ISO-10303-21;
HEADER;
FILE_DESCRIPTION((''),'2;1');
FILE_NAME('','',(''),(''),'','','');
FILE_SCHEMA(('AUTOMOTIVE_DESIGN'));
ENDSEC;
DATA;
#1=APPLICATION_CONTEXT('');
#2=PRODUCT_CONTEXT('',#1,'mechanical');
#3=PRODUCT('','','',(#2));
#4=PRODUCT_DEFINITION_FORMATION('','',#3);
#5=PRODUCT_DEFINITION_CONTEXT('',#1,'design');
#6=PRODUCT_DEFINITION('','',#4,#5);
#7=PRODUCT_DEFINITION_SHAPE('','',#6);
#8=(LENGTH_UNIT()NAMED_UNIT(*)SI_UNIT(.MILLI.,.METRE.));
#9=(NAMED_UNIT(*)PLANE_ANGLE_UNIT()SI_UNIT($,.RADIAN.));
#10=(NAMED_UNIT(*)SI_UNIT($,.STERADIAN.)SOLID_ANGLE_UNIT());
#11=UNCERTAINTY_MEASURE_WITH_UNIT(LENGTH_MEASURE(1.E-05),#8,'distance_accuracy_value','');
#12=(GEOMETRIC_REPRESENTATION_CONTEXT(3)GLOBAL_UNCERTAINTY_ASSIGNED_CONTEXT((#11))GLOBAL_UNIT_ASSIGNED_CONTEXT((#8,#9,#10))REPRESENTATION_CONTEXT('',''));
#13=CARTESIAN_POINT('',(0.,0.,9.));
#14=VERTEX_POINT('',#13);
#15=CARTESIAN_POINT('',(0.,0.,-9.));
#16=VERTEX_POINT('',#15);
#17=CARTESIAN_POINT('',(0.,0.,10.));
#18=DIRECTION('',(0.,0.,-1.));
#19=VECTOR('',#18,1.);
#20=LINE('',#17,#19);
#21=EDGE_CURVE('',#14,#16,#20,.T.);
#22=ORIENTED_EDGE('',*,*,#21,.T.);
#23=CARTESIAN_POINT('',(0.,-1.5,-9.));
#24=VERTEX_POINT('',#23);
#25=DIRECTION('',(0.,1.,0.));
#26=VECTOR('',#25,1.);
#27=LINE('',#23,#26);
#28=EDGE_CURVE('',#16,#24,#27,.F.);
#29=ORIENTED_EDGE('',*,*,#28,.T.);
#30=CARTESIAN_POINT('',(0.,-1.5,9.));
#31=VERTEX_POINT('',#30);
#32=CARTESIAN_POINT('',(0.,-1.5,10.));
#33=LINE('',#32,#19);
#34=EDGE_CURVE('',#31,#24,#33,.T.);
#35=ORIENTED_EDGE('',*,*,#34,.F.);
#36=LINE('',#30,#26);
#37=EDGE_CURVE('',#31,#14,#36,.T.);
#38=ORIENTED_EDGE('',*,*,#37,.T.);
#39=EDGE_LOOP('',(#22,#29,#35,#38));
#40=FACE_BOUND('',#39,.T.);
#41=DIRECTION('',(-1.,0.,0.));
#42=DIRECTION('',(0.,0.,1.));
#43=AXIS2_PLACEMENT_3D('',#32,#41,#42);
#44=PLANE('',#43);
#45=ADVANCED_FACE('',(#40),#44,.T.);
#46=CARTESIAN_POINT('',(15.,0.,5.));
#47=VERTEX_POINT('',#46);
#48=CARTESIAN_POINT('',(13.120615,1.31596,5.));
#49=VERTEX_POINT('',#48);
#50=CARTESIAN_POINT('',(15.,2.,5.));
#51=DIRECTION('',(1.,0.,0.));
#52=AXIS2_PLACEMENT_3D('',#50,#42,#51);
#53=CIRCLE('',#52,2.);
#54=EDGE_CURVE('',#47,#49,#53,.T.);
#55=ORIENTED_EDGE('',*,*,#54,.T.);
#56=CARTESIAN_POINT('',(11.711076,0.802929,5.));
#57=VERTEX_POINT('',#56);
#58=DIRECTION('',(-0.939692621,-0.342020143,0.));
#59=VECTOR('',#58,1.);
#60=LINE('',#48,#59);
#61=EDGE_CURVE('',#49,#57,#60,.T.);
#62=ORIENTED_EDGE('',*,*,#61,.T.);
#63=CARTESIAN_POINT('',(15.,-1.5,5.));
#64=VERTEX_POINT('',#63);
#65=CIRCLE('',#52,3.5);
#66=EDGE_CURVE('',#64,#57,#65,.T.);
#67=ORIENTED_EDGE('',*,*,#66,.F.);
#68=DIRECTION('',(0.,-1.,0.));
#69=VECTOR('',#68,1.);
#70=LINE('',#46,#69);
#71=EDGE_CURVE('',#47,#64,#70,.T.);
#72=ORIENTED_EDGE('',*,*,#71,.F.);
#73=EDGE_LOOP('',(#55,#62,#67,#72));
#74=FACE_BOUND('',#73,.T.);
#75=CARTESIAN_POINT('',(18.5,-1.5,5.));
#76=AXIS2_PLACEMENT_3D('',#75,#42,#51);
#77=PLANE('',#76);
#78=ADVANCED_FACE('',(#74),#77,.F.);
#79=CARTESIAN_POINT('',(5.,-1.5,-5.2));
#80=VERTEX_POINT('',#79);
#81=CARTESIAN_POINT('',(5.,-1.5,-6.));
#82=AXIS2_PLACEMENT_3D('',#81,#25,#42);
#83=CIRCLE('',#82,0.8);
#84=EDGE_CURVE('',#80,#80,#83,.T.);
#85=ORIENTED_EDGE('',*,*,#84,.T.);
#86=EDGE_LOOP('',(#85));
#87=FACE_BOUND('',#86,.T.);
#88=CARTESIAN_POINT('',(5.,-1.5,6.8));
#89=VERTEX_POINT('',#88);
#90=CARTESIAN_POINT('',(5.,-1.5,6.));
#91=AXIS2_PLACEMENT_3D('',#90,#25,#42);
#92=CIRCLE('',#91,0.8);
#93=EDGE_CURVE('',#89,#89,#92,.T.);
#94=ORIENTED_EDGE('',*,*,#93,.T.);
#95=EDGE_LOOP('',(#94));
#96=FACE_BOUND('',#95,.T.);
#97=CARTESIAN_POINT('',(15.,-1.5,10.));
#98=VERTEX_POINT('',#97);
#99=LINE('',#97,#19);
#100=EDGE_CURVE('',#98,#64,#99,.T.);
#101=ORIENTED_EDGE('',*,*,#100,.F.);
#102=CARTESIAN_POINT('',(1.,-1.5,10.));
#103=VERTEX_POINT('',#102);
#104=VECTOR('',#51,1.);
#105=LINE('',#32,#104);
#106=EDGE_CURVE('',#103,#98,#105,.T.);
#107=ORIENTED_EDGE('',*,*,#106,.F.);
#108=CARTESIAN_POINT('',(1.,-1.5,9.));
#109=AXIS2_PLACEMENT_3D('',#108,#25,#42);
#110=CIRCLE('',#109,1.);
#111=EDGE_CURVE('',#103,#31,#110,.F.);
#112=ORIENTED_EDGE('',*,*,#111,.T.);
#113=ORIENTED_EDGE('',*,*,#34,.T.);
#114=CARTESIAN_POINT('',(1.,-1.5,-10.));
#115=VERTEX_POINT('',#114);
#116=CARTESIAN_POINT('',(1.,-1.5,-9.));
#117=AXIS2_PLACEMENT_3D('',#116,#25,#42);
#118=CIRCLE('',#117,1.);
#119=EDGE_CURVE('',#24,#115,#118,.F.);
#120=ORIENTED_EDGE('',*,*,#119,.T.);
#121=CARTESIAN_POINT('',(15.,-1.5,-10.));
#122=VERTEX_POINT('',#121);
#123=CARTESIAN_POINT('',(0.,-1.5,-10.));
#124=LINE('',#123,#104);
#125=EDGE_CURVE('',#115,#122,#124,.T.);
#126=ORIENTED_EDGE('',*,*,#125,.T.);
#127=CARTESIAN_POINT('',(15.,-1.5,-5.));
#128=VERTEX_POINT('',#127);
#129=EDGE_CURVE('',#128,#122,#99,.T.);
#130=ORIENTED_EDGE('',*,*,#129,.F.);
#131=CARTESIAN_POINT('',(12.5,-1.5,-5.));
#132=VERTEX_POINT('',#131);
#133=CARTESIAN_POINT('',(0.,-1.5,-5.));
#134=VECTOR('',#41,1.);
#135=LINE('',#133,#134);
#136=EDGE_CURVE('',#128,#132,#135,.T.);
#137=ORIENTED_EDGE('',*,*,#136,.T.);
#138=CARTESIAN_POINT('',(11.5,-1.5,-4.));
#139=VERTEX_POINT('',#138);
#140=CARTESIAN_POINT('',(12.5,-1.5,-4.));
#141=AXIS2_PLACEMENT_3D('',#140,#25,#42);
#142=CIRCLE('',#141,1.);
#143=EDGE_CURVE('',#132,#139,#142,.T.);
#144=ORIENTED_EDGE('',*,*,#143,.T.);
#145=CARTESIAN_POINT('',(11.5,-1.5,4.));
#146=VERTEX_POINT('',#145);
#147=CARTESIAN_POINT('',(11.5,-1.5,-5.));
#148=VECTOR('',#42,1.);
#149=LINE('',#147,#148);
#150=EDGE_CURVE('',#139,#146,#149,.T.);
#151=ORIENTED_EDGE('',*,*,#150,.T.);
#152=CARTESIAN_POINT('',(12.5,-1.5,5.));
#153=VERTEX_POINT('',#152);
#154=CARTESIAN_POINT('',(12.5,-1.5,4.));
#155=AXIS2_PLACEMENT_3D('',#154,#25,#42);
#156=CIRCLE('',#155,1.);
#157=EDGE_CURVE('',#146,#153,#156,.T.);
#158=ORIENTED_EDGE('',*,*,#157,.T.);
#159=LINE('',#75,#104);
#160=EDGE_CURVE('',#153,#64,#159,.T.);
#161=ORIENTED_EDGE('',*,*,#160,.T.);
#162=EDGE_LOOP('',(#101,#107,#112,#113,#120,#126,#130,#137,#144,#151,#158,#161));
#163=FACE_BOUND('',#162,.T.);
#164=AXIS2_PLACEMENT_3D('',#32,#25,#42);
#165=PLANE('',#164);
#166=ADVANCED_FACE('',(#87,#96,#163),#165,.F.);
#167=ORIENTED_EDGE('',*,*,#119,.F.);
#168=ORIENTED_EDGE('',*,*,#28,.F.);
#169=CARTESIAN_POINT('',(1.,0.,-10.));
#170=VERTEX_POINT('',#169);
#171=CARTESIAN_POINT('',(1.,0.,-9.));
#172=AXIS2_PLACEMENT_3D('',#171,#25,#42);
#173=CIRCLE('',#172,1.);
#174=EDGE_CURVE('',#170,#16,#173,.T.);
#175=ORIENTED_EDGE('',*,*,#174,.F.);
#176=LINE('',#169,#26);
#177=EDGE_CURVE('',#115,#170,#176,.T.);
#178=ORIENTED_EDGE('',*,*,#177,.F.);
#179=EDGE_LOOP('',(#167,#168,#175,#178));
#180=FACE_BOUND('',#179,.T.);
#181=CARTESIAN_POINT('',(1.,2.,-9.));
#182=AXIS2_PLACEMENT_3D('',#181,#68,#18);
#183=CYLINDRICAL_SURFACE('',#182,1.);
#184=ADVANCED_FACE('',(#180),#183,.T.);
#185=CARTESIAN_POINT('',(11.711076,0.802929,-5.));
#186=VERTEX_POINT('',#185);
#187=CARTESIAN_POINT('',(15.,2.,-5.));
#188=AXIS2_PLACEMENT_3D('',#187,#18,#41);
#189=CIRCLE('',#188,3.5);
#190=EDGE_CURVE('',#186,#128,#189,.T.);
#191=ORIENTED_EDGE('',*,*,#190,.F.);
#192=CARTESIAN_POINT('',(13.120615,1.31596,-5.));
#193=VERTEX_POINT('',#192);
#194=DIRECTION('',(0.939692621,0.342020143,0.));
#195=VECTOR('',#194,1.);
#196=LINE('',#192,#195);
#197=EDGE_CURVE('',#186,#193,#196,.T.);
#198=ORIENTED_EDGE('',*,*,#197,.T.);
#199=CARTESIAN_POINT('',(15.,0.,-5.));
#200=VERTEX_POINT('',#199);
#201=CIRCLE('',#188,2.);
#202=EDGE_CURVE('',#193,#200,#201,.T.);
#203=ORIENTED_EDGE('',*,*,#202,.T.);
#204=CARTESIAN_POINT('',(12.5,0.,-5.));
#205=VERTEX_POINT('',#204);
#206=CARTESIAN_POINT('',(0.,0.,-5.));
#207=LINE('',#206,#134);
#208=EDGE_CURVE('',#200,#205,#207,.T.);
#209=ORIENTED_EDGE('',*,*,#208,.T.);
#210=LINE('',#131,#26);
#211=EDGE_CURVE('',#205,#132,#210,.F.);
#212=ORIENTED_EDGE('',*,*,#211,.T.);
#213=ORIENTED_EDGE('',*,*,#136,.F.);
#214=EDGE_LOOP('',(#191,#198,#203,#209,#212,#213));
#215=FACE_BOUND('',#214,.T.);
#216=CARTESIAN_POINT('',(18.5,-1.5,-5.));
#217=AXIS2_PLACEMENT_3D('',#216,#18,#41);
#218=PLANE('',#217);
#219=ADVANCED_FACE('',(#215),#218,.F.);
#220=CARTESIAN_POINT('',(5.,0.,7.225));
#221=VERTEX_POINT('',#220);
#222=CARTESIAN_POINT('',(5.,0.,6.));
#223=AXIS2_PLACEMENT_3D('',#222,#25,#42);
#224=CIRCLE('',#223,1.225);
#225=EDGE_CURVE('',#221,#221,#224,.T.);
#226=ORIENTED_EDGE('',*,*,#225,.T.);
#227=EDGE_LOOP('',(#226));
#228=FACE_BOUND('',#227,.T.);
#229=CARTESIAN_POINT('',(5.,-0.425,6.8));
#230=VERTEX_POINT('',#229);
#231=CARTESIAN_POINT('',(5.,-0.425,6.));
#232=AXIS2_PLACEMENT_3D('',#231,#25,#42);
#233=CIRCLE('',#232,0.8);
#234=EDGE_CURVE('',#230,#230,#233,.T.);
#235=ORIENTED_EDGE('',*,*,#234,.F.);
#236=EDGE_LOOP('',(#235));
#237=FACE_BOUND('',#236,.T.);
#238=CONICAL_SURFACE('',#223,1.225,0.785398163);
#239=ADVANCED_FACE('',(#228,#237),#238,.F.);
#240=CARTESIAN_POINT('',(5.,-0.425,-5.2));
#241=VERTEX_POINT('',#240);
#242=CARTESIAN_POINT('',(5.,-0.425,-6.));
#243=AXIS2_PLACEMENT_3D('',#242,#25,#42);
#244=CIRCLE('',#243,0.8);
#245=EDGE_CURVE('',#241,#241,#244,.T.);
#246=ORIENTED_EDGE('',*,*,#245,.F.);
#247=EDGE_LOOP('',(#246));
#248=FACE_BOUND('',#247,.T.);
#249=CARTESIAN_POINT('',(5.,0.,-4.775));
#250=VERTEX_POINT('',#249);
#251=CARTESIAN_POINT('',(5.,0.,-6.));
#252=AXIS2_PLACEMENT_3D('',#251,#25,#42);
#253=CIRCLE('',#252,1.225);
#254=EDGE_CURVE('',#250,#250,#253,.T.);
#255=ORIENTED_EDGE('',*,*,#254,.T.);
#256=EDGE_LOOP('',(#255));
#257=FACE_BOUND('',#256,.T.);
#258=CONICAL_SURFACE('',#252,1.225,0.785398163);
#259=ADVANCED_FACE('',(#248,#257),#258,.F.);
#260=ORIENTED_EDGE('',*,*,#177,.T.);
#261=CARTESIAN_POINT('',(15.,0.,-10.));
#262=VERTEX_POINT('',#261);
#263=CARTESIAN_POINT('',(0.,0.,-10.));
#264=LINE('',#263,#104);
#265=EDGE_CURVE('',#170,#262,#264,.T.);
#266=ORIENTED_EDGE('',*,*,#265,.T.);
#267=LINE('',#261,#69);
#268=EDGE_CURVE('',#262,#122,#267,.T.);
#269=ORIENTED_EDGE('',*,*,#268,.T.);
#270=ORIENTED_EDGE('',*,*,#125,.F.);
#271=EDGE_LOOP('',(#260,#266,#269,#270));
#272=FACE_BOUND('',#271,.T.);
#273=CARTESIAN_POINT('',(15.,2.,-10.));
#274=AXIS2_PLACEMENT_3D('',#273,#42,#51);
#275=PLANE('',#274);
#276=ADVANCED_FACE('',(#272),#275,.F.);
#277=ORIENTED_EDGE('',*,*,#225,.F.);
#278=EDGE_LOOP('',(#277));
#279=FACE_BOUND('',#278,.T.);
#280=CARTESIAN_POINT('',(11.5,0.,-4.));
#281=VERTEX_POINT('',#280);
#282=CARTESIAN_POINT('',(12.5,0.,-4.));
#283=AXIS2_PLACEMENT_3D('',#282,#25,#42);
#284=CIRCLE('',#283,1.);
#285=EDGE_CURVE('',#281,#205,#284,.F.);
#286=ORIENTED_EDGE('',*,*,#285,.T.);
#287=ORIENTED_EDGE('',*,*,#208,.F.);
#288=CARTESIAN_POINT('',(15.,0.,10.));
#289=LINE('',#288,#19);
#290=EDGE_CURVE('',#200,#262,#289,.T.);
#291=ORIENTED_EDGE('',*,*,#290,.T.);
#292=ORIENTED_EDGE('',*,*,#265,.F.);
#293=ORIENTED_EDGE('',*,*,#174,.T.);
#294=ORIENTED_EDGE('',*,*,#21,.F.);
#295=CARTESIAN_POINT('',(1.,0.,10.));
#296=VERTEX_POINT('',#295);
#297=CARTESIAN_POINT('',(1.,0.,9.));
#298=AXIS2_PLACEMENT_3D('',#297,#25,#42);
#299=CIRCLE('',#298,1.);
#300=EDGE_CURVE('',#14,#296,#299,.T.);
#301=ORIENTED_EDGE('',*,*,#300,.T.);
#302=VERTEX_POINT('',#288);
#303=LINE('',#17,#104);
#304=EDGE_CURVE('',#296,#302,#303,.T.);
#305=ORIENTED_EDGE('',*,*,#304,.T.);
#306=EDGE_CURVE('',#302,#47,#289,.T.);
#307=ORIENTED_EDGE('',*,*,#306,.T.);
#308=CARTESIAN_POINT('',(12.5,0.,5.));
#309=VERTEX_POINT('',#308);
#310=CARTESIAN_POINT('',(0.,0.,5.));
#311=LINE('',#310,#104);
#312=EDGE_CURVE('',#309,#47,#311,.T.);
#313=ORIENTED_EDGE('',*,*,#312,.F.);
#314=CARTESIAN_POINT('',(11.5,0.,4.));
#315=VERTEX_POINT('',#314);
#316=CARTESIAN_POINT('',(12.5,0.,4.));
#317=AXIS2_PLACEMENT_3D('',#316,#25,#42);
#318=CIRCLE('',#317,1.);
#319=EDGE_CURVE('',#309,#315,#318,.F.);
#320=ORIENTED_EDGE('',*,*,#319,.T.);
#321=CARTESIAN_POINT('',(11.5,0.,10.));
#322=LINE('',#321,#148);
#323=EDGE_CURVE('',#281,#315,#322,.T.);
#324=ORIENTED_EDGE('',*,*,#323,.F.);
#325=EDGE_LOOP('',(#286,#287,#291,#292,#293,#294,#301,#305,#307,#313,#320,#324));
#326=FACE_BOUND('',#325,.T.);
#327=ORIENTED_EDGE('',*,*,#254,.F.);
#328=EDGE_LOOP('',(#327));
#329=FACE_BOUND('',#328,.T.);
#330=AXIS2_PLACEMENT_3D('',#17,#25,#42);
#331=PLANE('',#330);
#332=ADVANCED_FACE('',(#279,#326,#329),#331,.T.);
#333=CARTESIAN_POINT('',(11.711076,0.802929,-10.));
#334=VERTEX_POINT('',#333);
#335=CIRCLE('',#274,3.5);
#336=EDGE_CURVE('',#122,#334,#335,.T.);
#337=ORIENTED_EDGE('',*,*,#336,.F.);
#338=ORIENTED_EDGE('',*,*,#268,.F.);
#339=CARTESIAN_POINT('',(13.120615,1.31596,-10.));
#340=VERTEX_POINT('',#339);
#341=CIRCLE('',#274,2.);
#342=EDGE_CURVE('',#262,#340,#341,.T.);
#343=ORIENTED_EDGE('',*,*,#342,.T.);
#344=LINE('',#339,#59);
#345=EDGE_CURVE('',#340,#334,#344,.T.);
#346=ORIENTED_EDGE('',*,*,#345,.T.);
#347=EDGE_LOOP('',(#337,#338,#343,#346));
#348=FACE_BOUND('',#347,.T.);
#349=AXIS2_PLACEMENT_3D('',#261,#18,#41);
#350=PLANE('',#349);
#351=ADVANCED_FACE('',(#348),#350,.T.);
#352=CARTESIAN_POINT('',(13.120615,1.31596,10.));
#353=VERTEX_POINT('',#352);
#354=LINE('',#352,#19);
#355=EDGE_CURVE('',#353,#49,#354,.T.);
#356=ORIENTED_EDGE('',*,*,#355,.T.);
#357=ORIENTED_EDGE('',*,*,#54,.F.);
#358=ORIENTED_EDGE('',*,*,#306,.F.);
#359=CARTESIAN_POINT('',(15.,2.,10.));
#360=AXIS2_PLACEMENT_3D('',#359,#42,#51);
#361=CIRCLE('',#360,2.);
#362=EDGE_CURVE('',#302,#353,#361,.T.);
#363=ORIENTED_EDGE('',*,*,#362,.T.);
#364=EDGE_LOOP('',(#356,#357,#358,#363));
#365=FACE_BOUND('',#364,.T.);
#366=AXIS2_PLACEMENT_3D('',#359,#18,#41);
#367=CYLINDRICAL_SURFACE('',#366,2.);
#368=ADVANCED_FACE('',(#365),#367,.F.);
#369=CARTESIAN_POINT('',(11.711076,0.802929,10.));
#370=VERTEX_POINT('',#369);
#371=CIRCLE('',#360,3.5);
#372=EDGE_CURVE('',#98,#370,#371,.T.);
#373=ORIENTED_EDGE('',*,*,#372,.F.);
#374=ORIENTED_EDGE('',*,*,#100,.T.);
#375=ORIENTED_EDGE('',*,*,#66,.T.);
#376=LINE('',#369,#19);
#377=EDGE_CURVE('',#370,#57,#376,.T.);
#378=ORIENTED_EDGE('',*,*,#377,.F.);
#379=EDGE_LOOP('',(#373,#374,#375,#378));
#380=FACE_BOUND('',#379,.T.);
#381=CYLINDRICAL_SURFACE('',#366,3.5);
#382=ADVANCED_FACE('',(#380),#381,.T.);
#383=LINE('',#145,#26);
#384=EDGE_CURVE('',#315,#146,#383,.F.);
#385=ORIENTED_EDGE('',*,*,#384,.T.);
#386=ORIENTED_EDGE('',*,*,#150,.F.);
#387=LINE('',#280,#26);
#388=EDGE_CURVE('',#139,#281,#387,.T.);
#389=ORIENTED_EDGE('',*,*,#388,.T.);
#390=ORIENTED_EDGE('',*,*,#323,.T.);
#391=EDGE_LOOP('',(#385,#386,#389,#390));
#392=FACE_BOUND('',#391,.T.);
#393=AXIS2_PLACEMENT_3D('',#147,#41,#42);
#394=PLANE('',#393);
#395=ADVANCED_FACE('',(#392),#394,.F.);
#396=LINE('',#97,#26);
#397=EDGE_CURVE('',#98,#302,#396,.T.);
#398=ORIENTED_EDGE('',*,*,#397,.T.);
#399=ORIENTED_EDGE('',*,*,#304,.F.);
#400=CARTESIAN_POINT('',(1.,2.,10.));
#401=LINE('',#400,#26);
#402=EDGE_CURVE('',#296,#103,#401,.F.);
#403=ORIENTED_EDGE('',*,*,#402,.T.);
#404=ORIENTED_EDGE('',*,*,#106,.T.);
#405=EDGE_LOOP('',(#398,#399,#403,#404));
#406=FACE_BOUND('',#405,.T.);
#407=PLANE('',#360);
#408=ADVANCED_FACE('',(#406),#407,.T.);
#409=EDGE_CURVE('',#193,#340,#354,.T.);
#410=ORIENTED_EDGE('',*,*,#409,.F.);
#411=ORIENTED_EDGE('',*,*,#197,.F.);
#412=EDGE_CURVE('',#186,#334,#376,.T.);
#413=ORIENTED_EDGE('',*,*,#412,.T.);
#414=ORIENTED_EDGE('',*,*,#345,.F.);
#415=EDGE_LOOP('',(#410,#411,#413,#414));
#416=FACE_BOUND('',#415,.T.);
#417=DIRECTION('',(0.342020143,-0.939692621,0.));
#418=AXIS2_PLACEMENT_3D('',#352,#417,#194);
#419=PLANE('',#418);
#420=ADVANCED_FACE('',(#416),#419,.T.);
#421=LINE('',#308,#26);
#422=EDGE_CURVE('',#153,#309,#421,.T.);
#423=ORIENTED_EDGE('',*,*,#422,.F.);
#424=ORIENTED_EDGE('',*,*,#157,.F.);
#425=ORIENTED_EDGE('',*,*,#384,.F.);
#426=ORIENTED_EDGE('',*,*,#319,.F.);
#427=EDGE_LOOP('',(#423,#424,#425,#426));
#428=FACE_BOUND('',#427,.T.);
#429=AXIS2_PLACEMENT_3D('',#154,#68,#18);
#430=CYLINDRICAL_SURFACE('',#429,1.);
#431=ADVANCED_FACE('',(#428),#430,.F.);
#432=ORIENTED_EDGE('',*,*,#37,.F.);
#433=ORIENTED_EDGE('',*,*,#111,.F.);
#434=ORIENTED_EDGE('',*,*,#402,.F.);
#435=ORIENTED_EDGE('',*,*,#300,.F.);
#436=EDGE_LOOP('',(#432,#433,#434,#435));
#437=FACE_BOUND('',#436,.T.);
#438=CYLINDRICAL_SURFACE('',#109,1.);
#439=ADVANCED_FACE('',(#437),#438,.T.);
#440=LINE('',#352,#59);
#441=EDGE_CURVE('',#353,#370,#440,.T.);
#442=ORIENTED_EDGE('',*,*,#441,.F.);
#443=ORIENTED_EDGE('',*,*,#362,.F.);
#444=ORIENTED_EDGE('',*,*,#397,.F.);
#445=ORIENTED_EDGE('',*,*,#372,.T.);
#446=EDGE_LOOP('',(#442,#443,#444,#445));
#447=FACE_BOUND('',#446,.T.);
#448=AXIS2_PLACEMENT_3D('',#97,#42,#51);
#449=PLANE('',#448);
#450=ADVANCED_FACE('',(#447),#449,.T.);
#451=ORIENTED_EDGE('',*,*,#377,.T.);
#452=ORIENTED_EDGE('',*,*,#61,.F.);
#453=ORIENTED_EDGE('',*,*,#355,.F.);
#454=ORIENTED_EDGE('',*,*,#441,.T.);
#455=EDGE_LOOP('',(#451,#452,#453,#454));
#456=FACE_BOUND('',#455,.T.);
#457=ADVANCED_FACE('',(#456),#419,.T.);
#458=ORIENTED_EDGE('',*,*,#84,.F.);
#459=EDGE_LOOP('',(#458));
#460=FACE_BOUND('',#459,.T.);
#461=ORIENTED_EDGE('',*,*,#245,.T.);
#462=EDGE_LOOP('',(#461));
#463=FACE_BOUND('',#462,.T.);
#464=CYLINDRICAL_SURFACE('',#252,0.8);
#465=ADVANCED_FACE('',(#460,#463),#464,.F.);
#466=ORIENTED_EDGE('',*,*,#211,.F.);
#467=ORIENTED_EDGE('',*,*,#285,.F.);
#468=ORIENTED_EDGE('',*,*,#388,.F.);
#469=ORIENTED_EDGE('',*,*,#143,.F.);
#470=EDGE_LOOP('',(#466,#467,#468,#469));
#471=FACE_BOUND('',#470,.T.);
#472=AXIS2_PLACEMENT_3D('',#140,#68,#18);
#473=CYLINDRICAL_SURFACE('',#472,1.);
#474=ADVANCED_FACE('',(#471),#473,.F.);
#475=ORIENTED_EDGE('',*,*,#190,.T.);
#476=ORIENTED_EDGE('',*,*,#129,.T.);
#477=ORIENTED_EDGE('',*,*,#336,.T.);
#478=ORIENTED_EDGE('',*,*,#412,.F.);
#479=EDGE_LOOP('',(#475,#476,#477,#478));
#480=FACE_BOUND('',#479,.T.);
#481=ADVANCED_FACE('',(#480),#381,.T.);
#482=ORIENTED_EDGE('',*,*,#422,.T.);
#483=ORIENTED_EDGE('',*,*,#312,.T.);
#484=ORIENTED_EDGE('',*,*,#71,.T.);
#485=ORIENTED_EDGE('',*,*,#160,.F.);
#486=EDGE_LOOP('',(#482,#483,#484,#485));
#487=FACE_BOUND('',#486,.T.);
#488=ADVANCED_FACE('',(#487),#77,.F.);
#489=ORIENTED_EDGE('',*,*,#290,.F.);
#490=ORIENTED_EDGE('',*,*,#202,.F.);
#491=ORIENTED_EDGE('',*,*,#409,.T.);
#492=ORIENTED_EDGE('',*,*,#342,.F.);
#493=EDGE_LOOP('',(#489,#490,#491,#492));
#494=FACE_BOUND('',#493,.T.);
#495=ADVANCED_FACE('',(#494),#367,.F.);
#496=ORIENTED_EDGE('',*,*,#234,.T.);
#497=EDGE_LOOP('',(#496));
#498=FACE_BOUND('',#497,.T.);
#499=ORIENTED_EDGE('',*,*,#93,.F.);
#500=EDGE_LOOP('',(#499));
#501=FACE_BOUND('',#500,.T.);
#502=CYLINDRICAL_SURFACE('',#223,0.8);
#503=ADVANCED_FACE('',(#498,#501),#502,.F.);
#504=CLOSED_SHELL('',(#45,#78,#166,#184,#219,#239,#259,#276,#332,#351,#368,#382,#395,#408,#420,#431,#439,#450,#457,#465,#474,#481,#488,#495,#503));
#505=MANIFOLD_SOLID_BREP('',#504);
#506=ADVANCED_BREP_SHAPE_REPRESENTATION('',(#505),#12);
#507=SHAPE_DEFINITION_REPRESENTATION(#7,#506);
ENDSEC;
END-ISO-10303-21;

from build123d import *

# Parameters (mm, degrees)
BASE_FLANGE1_DEPTH              = 10
CUT_EXTRUDE1_DEPTH              = 22.737065119
CUT_EXTRUDE1_DEPTH_BACK         = 22.737065119
SKETCH6_W                       = 7
SKETCH6_H                       = 10
FILLET1_R                       = 1
M2X0_4_TAPPED_HOLE1_D           = 1.6
M2X0_4_TAPPED_HOLE1_CSINK_D     = 2.45
M2X0_4_TAPPED_HOLE1_CSINK_ANGLE = 90


# Sheet-metal steps are written as plain solids
with BuildPart() as part:
    # Sketch1 → Base-Flange1 (new, symmetric)
    with BuildSketch(Plane.XY):
        with BuildLine():
            Line((0, 0), (15, 0))
            ThreePointArc((15, 0), (16.147152873, 3.638304089), (13.120614758, 1.315959713))
            Line((13.120614758, 1.315959713), (11.711075827, 0.802929498))
            ThreePointArc((11.711075827, 0.802929498), (17.007517527, 4.867032155), (15, -1.5))
            Line((15, -1.5), (0, -1.5))
            Line((0, -1.5), (0, 0))
        make_face()
    extrude(amount=BASE_FLANGE1_DEPTH, both=True)

    # Sketch6 → Cut-Extrude1 (cut, two sides: drawn at the far end of the back side and taken through both)
    with BuildSketch(Plane(origin=(0, 0, 0), x_dir=(1, 0, 0), z_dir=(0, 1, 0)).offset(-CUT_EXTRUDE1_DEPTH_BACK)):
        with Locations((15, 0)):
            Rectangle(SKETCH6_W, SKETCH6_H)
    extrude(amount=CUT_EXTRUDE1_DEPTH + CUT_EXTRUDE1_DEPTH_BACK, mode=Mode.SUBTRACT)

    # Fillet1
    fillet1_edges = [part.edges().sort_by_distance(p)[0] for p in [
        (0, -0.75, 10),
        (11.5, -0.75, -5),
        (11.5, -0.75, 5),
        (0, -0.75, -10),
    ]]
    fillet(fillet1_edges, radius=FILLET1_R)

    # M2x0.4 Tapped Hole1 (through all)
    with Locations(Plane(origin=(0, 0, 0), x_dir=(1, 0, 0), z_dir=(0, 1, 0))):
        with Locations((5, 6), (5, -6)):
            CounterSinkHole(M2X0_4_TAPPED_HOLE1_D / 2, M2X0_4_TAPPED_HOLE1_CSINK_D / 2, counter_sink_angle=M2X0_4_TAPPED_HOLE1_CSINK_ANGLE)


solid = part.part
